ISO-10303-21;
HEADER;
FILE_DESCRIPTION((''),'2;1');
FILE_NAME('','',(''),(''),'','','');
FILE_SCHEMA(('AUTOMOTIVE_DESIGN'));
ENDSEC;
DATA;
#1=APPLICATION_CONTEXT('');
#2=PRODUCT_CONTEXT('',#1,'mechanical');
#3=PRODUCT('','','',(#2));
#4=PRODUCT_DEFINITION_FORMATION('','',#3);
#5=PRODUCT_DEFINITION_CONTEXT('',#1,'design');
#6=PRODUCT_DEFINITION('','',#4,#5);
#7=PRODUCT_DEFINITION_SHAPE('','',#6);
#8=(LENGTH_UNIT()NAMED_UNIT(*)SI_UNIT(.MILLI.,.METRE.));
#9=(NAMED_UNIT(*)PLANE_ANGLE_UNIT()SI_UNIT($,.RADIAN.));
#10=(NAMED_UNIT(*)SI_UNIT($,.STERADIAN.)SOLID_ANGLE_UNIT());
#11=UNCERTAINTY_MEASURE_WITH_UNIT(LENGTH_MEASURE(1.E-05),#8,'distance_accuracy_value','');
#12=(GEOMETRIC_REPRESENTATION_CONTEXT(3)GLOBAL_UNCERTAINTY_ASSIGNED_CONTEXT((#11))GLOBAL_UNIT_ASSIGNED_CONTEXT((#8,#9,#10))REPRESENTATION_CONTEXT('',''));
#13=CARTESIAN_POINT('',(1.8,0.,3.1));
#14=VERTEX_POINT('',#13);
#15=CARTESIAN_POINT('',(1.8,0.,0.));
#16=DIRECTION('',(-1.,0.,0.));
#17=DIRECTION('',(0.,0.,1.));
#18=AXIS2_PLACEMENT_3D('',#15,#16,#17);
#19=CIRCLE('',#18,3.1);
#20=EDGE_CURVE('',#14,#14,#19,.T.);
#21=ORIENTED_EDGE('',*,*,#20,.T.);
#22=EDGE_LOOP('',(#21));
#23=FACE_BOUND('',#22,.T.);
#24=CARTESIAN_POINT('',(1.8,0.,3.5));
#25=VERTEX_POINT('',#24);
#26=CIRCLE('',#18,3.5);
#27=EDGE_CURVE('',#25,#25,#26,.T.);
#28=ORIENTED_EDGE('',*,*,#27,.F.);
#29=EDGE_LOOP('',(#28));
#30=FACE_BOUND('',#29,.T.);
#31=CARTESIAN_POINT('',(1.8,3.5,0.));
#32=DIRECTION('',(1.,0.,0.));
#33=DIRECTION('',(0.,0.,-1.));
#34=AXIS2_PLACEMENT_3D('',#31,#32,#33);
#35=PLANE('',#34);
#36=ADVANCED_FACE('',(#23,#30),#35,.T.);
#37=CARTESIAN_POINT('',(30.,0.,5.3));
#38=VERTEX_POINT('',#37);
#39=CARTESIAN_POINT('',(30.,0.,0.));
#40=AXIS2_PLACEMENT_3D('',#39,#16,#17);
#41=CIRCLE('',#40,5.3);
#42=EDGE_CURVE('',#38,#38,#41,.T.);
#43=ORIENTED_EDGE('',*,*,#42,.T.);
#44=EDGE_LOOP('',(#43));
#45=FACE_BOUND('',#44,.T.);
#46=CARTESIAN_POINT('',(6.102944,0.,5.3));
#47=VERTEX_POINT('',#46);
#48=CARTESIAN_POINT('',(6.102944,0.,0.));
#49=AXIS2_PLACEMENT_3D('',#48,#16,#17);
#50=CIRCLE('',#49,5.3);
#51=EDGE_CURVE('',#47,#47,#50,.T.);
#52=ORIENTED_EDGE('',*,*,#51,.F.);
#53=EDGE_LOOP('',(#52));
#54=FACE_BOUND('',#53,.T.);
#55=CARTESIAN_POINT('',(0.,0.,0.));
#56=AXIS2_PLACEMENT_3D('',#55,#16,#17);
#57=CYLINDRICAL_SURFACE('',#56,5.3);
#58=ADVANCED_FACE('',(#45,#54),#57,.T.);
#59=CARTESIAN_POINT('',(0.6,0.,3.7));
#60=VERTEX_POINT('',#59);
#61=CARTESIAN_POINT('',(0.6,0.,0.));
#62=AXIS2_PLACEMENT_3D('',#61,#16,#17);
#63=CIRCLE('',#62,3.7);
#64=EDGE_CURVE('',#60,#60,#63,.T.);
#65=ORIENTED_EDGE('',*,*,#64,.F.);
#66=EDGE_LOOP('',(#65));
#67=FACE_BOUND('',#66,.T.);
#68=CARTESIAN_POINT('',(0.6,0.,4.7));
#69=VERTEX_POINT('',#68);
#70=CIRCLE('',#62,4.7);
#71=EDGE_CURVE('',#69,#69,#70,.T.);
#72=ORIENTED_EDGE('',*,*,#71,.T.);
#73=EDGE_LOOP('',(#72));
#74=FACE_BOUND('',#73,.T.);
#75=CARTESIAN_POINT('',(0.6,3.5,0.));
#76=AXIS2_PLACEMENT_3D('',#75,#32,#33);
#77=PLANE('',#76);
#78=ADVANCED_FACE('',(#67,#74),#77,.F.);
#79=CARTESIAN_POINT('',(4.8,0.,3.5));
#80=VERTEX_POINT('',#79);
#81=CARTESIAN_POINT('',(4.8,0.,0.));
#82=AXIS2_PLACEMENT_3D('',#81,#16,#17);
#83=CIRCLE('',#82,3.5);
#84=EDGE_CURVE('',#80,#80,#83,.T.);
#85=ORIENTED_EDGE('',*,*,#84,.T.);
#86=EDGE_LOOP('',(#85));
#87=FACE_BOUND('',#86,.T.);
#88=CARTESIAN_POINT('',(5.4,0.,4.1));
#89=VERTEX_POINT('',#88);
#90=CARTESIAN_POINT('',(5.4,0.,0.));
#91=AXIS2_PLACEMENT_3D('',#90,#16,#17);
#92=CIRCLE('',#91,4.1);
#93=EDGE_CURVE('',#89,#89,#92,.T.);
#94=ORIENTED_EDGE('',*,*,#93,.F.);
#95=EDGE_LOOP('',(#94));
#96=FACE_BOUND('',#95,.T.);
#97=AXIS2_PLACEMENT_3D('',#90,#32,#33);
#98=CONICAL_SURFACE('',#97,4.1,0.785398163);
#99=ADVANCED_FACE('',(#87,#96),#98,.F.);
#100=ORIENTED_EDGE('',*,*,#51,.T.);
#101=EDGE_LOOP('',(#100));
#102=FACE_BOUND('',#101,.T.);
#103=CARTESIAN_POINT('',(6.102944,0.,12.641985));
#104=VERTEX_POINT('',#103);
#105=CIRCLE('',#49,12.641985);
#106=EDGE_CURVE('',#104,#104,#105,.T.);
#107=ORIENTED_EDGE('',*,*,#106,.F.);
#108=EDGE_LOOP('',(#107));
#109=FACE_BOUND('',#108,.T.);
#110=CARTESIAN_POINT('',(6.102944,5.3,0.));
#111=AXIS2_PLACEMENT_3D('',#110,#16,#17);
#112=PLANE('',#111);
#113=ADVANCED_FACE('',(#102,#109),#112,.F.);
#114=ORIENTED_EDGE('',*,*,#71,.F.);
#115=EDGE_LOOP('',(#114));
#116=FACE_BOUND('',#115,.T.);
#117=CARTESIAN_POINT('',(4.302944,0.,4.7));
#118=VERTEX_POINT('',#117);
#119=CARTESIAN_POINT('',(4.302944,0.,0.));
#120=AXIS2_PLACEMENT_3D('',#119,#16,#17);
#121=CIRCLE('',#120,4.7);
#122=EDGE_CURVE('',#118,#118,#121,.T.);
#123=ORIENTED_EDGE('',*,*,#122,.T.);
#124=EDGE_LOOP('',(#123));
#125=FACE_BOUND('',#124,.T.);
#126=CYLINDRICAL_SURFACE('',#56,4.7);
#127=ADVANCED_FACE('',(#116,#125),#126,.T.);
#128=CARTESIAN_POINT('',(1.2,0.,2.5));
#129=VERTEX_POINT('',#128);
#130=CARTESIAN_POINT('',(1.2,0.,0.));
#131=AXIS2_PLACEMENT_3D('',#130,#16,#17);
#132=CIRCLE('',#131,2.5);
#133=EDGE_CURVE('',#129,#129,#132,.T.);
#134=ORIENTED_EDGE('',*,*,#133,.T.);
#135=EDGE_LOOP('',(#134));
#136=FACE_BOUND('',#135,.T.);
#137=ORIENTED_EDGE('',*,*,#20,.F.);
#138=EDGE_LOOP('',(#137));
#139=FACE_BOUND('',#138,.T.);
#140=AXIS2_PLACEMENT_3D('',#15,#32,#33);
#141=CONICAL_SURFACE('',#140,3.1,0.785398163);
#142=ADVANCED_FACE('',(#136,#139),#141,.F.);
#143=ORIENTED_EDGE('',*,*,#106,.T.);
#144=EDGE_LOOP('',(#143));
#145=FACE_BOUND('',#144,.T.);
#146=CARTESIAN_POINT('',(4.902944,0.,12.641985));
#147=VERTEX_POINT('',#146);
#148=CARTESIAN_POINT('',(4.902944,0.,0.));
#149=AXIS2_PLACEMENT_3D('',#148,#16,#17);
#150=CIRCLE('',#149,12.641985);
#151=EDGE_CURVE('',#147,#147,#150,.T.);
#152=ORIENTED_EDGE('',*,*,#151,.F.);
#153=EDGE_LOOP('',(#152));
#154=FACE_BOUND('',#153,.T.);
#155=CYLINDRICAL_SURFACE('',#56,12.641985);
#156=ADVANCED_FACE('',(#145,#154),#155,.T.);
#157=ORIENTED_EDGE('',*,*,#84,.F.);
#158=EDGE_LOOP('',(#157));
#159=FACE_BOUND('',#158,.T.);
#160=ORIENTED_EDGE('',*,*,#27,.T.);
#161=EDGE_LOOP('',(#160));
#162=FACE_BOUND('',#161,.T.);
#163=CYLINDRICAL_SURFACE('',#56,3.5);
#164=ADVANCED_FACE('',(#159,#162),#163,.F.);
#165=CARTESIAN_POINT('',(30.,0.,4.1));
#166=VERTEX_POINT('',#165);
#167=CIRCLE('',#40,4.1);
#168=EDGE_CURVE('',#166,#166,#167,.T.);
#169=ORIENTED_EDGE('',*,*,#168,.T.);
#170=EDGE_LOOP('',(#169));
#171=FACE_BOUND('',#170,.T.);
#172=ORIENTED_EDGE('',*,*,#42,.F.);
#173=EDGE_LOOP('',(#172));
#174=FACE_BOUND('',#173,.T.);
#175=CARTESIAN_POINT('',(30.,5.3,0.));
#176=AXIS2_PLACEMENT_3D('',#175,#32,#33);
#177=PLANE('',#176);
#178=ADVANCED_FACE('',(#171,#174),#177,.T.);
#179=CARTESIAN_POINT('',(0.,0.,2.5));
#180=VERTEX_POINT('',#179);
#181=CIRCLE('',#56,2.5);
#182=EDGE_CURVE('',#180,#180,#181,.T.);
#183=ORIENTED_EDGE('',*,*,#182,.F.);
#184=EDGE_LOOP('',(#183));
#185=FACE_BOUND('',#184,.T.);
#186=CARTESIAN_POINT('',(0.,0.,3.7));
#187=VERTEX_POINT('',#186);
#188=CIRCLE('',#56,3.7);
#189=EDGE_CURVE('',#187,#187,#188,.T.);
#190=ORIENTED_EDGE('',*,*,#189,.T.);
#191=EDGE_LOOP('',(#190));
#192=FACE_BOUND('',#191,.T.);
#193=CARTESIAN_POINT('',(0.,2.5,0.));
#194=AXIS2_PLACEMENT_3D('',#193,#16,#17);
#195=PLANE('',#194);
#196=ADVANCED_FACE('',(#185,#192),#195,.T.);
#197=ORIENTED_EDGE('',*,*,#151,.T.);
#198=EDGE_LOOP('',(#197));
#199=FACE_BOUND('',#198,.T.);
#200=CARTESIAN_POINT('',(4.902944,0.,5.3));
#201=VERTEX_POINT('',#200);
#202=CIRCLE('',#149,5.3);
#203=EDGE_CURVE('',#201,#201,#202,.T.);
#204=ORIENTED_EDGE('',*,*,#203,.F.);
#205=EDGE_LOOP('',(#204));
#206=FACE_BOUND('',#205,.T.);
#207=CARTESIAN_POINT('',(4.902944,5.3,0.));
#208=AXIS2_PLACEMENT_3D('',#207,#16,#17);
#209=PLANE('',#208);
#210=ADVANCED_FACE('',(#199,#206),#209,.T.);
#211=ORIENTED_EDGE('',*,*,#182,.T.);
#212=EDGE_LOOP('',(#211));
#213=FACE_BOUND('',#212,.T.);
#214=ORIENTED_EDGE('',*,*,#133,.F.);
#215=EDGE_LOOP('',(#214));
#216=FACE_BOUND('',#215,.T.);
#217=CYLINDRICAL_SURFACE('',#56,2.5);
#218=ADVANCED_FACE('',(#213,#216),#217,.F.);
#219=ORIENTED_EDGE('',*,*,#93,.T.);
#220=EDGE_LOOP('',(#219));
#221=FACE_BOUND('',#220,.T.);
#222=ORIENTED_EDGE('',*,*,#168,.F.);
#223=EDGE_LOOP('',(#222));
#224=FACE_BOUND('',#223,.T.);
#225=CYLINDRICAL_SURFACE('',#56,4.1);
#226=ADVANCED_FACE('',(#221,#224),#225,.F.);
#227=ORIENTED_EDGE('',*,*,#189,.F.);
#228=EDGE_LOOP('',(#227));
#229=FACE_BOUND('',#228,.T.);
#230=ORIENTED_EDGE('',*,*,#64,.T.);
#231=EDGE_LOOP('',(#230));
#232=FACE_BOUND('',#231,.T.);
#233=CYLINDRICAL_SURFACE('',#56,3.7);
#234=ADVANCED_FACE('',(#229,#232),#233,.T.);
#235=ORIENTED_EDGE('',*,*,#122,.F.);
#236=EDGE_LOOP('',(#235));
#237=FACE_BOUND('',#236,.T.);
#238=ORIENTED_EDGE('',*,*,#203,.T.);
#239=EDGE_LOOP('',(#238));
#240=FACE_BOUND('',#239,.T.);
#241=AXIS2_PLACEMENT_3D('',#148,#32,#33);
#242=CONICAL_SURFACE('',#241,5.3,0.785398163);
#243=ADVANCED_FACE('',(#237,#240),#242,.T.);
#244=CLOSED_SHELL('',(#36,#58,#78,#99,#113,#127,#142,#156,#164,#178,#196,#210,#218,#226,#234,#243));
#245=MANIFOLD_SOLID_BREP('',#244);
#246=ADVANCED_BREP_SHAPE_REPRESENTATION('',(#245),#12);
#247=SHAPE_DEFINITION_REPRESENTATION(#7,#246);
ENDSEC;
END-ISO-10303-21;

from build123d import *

# Parameters (mm, degrees)
SKETCH2_W = 1.2
SKETCH2_H = 7.341985405


# Read off the part's stored shape, not the designer's step: Revolve-Thin1
with BuildPart() as part:
    # Revolve-Thin1 outline → Revolve-Thin1 (revolve)
    with BuildSketch(Plane.YX):
        Polygon((4.1, 5.4), (3.5, 4.8), (3.5, 1.8), (3.1, 1.8), (2.5, 1.2), (2.5, 0), (3.7, 0), (3.7, 0.6), (4.7, 0.6), (4.7, 4.302943725), (5.3, 4.902943725), (5.3, 30), (4.1, 30), align=None)
    revolve(axis=Axis((0, 0, 0), (1, 0, 0)))

    # Sketch2 → Revolve-Thin2 (revolve)
    with BuildSketch(Plane.XY, mode=Mode.PRIVATE) as revolve_thin2_sk:
        with Locations((5.502943725, 8.970992703)):
            Rectangle(SKETCH2_W, SKETCH2_H)
    revolve(revolve_thin2_sk.sketch.rotate(Axis((0, 0, 0), (1, 0, 0)), 90), axis=Axis((0, 0, 0), (1, 0, 0)))


solid = part.part
